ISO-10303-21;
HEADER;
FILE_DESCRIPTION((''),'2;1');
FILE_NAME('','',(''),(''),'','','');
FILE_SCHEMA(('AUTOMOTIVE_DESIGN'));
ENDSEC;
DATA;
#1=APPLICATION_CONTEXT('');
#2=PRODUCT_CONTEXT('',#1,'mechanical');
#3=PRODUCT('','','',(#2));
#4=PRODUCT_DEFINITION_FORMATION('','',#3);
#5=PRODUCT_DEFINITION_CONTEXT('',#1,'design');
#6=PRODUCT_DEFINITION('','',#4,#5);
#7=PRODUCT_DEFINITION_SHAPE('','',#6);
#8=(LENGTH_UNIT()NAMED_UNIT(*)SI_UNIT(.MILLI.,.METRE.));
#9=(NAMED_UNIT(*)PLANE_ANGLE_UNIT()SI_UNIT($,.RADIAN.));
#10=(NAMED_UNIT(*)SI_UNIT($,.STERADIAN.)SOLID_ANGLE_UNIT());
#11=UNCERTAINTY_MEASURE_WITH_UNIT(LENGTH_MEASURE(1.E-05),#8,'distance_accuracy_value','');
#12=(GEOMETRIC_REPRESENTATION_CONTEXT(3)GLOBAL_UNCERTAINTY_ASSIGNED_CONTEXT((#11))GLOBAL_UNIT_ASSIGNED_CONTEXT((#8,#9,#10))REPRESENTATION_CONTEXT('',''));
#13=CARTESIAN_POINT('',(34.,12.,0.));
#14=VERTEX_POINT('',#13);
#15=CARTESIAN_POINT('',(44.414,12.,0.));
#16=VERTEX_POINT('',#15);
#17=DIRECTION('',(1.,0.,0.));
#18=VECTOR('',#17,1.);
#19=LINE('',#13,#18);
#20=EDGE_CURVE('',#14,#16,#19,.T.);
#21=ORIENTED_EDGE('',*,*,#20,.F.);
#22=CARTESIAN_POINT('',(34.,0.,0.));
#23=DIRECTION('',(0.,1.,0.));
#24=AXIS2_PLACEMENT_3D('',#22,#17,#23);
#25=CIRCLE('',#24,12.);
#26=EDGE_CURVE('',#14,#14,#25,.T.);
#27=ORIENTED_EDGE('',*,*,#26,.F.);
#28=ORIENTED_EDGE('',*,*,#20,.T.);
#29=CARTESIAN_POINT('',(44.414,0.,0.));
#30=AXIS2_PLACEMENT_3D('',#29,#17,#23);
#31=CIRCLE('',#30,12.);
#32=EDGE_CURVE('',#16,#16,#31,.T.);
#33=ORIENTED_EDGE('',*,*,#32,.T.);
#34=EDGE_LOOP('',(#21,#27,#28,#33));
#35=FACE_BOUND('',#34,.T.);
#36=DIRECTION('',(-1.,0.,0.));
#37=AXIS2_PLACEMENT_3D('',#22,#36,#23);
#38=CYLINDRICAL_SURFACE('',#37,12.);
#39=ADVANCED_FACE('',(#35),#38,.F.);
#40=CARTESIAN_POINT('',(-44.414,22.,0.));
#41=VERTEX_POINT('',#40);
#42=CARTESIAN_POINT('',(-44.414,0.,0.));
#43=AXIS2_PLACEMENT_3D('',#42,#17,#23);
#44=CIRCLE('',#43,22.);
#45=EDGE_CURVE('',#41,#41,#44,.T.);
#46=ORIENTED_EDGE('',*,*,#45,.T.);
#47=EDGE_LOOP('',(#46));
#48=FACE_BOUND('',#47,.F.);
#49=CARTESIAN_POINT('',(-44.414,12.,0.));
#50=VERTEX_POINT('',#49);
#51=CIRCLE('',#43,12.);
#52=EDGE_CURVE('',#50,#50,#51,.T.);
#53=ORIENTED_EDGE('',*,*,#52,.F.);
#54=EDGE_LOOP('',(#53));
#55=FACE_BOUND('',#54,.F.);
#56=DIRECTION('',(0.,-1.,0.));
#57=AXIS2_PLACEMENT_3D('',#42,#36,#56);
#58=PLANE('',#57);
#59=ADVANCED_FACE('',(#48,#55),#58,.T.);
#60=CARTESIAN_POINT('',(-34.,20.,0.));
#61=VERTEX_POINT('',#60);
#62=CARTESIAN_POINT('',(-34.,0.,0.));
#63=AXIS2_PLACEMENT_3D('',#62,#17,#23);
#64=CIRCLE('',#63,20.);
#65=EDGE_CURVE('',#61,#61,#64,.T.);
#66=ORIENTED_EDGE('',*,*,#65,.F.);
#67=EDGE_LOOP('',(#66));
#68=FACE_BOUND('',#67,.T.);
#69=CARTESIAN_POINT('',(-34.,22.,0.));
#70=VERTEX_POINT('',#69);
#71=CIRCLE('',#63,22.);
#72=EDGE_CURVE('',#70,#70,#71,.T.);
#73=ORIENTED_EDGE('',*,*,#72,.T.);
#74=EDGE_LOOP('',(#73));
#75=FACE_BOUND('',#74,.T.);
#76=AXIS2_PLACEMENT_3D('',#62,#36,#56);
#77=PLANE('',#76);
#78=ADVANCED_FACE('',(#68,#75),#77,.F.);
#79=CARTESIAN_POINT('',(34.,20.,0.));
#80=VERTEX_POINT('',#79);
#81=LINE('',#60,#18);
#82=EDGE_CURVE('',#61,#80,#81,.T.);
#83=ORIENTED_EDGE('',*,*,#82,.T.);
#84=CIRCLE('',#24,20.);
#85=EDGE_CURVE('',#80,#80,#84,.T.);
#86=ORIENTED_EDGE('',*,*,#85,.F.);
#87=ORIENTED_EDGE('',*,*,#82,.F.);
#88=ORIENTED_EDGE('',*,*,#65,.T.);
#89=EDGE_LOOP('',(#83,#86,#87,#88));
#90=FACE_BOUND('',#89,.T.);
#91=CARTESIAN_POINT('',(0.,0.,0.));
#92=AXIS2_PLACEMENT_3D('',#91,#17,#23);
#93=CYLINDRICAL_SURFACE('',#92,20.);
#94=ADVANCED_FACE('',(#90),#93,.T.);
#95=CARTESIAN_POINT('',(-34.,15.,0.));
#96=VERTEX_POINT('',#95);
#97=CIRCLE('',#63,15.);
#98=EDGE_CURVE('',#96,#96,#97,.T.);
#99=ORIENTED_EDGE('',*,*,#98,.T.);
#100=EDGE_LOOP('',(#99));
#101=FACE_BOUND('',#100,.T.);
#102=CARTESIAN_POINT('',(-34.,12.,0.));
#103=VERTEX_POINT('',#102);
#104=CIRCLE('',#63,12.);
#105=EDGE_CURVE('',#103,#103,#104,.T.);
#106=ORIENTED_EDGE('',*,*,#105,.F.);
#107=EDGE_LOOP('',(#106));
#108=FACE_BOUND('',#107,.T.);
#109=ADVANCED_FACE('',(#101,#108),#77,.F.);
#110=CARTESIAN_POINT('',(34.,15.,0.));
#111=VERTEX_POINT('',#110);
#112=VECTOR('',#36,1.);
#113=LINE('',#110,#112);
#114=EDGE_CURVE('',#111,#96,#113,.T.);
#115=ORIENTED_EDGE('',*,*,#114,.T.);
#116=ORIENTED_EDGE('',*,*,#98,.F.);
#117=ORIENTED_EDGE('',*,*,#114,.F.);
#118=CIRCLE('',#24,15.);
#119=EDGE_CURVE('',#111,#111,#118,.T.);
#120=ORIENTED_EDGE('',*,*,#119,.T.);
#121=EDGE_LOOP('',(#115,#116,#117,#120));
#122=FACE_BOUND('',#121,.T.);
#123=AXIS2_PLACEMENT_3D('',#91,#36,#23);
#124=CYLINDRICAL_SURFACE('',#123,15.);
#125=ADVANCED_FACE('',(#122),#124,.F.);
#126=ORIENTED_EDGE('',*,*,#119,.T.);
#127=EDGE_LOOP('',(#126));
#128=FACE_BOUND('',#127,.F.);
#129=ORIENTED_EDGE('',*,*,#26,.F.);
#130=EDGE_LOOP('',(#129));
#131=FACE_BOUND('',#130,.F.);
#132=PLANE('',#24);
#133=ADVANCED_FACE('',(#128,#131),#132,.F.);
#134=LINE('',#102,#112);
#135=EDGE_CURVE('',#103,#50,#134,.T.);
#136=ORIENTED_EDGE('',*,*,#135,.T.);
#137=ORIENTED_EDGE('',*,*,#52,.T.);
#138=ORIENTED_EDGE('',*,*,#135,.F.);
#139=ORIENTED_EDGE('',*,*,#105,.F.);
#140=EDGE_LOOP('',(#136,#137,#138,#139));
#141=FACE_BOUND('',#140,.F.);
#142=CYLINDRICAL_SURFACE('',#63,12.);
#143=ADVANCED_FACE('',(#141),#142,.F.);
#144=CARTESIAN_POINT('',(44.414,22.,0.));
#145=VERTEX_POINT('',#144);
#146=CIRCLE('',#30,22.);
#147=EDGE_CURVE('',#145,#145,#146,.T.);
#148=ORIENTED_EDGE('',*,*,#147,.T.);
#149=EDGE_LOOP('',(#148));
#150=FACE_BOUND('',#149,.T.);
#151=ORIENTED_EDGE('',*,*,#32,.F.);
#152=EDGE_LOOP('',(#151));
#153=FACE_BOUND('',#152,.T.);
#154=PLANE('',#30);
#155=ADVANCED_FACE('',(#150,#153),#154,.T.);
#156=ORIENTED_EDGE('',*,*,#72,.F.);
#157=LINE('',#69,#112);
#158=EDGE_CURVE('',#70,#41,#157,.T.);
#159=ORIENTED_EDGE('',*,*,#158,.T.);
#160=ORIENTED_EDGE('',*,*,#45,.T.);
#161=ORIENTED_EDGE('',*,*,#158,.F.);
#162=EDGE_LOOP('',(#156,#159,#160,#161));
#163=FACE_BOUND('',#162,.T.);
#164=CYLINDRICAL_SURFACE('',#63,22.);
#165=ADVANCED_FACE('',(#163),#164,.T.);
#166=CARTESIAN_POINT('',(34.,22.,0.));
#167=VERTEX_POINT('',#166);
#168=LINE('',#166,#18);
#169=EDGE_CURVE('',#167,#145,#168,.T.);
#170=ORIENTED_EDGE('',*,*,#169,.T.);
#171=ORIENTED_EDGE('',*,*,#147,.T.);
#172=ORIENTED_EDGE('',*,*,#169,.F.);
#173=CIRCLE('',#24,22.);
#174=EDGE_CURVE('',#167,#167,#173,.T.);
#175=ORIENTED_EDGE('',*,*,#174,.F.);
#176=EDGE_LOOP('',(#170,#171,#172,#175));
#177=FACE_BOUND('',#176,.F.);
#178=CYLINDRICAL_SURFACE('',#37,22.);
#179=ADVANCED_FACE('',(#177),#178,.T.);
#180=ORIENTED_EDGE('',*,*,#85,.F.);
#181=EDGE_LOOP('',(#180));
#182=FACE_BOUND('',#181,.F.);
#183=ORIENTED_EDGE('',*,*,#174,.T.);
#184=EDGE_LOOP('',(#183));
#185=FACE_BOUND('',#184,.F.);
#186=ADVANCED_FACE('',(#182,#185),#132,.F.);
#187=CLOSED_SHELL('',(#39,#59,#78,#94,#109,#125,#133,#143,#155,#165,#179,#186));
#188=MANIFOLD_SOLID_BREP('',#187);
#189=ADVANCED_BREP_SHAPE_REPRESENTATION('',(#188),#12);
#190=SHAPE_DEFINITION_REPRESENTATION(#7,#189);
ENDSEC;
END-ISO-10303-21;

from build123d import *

# Parameters (mm, degrees)
F0_R     = 20
F0_R_2   = 15
F1_DEPTH = 34
F2_R     = 22
F2_R_2   = 12
F3_DEPTH = 10.414


# Not quite as in the source:
# - a pattern or mirror of a feature is missing from the dataset's text; its kind, count and spacing are read off the source's solid


with BuildPart() as f1:
    # F0 (on Right) → F1 (new body, symmetric)
    with BuildSketch(Plane.YZ):
        Circle(F0_R)
        Circle(F0_R_2, mode=Mode.SUBTRACT)
    extrude(amount=F1_DEPTH, both=True)

    # F2 (on face) → F3 (join)
    with BuildSketch(Plane.YZ.offset(34)):
        Circle(F2_R)
        Circle(F2_R_2, mode=Mode.SUBTRACT)
    f3 = extrude(amount=F3_DEPTH)

    # F3_copies: F3 across plane
    add(f3.mirror(Plane(origin=(0, 0, 0), x_dir=(0, 0, -1), z_dir=(-1, 0, 0))))


solid = f1.part
